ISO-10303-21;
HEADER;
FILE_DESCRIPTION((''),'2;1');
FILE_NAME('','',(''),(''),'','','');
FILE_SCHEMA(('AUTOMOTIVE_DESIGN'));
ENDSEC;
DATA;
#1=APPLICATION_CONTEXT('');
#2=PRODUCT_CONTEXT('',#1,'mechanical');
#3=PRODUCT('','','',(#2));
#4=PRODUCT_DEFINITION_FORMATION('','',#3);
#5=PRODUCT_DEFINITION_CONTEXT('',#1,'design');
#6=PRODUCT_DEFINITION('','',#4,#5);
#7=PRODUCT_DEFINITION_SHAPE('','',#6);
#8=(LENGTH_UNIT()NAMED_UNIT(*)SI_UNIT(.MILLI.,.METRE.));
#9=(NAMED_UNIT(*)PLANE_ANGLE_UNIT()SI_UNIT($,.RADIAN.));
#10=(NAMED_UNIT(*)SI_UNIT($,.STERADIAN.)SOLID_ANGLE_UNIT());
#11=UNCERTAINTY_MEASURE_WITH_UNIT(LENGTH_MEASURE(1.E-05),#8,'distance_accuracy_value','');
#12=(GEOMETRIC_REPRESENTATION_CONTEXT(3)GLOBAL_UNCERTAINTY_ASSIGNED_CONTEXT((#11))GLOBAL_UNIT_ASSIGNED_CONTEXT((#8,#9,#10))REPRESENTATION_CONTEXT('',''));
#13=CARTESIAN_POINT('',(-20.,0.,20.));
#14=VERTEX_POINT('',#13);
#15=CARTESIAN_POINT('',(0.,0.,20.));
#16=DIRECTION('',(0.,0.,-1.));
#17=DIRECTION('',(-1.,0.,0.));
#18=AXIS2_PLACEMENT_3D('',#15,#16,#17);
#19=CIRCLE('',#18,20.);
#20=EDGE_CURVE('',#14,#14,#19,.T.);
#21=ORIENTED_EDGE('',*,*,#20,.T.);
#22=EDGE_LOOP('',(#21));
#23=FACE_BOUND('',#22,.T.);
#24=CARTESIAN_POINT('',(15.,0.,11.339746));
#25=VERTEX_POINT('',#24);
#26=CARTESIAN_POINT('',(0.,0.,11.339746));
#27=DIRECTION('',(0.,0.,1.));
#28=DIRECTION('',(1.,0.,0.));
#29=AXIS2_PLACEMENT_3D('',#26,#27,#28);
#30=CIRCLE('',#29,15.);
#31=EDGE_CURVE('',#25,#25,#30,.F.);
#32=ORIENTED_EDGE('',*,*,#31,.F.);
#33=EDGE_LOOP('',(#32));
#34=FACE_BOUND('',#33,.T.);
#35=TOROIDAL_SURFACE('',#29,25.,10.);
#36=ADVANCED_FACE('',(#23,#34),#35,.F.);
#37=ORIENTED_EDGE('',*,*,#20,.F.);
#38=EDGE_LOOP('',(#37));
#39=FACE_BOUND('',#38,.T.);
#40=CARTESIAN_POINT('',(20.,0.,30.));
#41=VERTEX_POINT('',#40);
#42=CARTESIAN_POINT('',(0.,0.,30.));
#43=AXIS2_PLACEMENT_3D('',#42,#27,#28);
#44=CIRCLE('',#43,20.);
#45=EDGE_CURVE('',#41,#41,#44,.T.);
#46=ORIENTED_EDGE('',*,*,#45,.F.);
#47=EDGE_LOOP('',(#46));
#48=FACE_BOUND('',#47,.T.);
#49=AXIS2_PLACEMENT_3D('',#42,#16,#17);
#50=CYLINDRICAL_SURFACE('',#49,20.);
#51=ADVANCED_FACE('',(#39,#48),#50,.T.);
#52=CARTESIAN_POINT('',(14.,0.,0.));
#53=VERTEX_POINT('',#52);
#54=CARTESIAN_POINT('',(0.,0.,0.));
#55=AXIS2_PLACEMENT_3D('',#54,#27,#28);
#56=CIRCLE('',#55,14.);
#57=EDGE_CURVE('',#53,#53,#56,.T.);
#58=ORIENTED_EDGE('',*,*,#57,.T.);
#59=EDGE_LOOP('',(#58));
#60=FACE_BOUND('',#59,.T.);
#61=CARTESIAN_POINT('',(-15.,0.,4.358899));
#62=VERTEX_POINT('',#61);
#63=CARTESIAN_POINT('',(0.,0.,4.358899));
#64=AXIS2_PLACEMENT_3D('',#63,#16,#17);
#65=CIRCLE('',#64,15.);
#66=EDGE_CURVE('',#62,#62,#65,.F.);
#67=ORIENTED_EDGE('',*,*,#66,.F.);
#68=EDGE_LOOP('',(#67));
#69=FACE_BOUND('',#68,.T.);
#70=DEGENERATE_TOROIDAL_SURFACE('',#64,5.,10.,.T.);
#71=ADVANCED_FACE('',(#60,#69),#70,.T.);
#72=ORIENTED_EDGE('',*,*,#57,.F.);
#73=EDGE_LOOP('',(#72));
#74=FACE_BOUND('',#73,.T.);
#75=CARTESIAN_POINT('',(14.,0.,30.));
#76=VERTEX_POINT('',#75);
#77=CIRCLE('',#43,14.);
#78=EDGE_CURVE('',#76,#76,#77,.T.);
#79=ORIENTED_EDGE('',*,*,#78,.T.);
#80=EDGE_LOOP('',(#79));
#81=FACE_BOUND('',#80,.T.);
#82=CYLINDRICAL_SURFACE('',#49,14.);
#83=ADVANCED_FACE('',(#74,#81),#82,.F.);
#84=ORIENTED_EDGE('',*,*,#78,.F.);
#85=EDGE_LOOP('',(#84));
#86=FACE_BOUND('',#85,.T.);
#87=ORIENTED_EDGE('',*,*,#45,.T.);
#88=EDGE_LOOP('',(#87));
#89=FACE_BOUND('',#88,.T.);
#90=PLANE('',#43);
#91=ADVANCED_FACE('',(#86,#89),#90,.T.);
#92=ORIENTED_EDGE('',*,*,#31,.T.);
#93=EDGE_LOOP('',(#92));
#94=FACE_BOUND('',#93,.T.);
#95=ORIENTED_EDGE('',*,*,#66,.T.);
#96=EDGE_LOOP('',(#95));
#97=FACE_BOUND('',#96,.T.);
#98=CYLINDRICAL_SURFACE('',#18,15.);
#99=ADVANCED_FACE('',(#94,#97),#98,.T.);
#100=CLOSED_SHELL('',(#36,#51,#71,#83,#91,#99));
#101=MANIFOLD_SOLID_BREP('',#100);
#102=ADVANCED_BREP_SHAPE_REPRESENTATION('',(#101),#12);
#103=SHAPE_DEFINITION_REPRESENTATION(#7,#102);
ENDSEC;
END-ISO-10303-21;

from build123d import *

# Parameters (mm, degrees)
SKETCH1_R           = 20
SKETCH1_R_2         = 14
BOSS_EXTRUDE1_DEPTH = 30
SKETCH2_R           = 20
SKETCH2_R_2         = 15
CUT_EXTRUDE1_DEPTH  = 20
FILLET1_R           = 10


with BuildPart() as part:
    # Sketch1 → Boss-Extrude1 (new body)
    with BuildSketch(Plane.XY):
        Circle(SKETCH1_R)
        Circle(SKETCH1_R_2, mode=Mode.SUBTRACT)
    extrude(amount=BOSS_EXTRUDE1_DEPTH)

    # Sketch2 → Cut-Extrude1 (cut)
    with BuildSketch(Plane(origin=(0, 0, 0), x_dir=(-1, 0, 0), z_dir=(0, 0, -1))):
        Circle(SKETCH2_R)
        Circle(SKETCH2_R_2, mode=Mode.SUBTRACT)
    extrude(amount=-CUT_EXTRUDE1_DEPTH, mode=Mode.SUBTRACT)

    # Fillet1
    # the kernel refuses this fillet: 10 mm, written as the material it adds along each edge
    with BuildSketch(Plane(origin=(0, 0, 20), x_dir=(-1, 0, 0), z_dir=(0, -1, 0))) as fillet1_piece_1:
        with BuildLine():
            CenterArc((25, 8.660254038), FILLET1_R, 180, 60)
            Line((20, 0), (19.9, -0.173205081))
            ThreePointArc((19.9, -0.173205081), (17.5, -0.2), (15, -0.2))
            Line((15, -0.2), (14.8, 0))
            Line((14.8, 0), (14.8, 8.660254038))
            Line((14.8, 8.660254038), (15, 8.660254038))
        make_face()
    revolve(axis=Axis((0, 0, 20), (0, 0, -1)))
    # the kernel refuses this fillet: 10 mm, written as the material it takes off along each edge
    with BuildSketch(Plane(origin=(0, 0, 0), x_dir=(-1, 0, 0), z_dir=(0, -1, 0))) as fillet1_2_piece_1:
        with BuildLine():
            CenterArc((5, -4.358898944), FILLET1_R, 0, 25.841932763)
            Line((14, 0), (14.18, 0.087177979))
            ThreePointArc((14.18, 0.087177979), (14.5, 0.2), (15, 0.2))
            Line((15, 0.2), (15.2, 0))
            Line((15.2, 0), (15.2, -4.358898944))
            Line((15.2, -4.358898944), (15, -4.358898944))
        make_face()
    revolve(axis=Axis((0, 0, 0), (0, 0, -1)), mode=Mode.SUBTRACT)


solid = part.part
